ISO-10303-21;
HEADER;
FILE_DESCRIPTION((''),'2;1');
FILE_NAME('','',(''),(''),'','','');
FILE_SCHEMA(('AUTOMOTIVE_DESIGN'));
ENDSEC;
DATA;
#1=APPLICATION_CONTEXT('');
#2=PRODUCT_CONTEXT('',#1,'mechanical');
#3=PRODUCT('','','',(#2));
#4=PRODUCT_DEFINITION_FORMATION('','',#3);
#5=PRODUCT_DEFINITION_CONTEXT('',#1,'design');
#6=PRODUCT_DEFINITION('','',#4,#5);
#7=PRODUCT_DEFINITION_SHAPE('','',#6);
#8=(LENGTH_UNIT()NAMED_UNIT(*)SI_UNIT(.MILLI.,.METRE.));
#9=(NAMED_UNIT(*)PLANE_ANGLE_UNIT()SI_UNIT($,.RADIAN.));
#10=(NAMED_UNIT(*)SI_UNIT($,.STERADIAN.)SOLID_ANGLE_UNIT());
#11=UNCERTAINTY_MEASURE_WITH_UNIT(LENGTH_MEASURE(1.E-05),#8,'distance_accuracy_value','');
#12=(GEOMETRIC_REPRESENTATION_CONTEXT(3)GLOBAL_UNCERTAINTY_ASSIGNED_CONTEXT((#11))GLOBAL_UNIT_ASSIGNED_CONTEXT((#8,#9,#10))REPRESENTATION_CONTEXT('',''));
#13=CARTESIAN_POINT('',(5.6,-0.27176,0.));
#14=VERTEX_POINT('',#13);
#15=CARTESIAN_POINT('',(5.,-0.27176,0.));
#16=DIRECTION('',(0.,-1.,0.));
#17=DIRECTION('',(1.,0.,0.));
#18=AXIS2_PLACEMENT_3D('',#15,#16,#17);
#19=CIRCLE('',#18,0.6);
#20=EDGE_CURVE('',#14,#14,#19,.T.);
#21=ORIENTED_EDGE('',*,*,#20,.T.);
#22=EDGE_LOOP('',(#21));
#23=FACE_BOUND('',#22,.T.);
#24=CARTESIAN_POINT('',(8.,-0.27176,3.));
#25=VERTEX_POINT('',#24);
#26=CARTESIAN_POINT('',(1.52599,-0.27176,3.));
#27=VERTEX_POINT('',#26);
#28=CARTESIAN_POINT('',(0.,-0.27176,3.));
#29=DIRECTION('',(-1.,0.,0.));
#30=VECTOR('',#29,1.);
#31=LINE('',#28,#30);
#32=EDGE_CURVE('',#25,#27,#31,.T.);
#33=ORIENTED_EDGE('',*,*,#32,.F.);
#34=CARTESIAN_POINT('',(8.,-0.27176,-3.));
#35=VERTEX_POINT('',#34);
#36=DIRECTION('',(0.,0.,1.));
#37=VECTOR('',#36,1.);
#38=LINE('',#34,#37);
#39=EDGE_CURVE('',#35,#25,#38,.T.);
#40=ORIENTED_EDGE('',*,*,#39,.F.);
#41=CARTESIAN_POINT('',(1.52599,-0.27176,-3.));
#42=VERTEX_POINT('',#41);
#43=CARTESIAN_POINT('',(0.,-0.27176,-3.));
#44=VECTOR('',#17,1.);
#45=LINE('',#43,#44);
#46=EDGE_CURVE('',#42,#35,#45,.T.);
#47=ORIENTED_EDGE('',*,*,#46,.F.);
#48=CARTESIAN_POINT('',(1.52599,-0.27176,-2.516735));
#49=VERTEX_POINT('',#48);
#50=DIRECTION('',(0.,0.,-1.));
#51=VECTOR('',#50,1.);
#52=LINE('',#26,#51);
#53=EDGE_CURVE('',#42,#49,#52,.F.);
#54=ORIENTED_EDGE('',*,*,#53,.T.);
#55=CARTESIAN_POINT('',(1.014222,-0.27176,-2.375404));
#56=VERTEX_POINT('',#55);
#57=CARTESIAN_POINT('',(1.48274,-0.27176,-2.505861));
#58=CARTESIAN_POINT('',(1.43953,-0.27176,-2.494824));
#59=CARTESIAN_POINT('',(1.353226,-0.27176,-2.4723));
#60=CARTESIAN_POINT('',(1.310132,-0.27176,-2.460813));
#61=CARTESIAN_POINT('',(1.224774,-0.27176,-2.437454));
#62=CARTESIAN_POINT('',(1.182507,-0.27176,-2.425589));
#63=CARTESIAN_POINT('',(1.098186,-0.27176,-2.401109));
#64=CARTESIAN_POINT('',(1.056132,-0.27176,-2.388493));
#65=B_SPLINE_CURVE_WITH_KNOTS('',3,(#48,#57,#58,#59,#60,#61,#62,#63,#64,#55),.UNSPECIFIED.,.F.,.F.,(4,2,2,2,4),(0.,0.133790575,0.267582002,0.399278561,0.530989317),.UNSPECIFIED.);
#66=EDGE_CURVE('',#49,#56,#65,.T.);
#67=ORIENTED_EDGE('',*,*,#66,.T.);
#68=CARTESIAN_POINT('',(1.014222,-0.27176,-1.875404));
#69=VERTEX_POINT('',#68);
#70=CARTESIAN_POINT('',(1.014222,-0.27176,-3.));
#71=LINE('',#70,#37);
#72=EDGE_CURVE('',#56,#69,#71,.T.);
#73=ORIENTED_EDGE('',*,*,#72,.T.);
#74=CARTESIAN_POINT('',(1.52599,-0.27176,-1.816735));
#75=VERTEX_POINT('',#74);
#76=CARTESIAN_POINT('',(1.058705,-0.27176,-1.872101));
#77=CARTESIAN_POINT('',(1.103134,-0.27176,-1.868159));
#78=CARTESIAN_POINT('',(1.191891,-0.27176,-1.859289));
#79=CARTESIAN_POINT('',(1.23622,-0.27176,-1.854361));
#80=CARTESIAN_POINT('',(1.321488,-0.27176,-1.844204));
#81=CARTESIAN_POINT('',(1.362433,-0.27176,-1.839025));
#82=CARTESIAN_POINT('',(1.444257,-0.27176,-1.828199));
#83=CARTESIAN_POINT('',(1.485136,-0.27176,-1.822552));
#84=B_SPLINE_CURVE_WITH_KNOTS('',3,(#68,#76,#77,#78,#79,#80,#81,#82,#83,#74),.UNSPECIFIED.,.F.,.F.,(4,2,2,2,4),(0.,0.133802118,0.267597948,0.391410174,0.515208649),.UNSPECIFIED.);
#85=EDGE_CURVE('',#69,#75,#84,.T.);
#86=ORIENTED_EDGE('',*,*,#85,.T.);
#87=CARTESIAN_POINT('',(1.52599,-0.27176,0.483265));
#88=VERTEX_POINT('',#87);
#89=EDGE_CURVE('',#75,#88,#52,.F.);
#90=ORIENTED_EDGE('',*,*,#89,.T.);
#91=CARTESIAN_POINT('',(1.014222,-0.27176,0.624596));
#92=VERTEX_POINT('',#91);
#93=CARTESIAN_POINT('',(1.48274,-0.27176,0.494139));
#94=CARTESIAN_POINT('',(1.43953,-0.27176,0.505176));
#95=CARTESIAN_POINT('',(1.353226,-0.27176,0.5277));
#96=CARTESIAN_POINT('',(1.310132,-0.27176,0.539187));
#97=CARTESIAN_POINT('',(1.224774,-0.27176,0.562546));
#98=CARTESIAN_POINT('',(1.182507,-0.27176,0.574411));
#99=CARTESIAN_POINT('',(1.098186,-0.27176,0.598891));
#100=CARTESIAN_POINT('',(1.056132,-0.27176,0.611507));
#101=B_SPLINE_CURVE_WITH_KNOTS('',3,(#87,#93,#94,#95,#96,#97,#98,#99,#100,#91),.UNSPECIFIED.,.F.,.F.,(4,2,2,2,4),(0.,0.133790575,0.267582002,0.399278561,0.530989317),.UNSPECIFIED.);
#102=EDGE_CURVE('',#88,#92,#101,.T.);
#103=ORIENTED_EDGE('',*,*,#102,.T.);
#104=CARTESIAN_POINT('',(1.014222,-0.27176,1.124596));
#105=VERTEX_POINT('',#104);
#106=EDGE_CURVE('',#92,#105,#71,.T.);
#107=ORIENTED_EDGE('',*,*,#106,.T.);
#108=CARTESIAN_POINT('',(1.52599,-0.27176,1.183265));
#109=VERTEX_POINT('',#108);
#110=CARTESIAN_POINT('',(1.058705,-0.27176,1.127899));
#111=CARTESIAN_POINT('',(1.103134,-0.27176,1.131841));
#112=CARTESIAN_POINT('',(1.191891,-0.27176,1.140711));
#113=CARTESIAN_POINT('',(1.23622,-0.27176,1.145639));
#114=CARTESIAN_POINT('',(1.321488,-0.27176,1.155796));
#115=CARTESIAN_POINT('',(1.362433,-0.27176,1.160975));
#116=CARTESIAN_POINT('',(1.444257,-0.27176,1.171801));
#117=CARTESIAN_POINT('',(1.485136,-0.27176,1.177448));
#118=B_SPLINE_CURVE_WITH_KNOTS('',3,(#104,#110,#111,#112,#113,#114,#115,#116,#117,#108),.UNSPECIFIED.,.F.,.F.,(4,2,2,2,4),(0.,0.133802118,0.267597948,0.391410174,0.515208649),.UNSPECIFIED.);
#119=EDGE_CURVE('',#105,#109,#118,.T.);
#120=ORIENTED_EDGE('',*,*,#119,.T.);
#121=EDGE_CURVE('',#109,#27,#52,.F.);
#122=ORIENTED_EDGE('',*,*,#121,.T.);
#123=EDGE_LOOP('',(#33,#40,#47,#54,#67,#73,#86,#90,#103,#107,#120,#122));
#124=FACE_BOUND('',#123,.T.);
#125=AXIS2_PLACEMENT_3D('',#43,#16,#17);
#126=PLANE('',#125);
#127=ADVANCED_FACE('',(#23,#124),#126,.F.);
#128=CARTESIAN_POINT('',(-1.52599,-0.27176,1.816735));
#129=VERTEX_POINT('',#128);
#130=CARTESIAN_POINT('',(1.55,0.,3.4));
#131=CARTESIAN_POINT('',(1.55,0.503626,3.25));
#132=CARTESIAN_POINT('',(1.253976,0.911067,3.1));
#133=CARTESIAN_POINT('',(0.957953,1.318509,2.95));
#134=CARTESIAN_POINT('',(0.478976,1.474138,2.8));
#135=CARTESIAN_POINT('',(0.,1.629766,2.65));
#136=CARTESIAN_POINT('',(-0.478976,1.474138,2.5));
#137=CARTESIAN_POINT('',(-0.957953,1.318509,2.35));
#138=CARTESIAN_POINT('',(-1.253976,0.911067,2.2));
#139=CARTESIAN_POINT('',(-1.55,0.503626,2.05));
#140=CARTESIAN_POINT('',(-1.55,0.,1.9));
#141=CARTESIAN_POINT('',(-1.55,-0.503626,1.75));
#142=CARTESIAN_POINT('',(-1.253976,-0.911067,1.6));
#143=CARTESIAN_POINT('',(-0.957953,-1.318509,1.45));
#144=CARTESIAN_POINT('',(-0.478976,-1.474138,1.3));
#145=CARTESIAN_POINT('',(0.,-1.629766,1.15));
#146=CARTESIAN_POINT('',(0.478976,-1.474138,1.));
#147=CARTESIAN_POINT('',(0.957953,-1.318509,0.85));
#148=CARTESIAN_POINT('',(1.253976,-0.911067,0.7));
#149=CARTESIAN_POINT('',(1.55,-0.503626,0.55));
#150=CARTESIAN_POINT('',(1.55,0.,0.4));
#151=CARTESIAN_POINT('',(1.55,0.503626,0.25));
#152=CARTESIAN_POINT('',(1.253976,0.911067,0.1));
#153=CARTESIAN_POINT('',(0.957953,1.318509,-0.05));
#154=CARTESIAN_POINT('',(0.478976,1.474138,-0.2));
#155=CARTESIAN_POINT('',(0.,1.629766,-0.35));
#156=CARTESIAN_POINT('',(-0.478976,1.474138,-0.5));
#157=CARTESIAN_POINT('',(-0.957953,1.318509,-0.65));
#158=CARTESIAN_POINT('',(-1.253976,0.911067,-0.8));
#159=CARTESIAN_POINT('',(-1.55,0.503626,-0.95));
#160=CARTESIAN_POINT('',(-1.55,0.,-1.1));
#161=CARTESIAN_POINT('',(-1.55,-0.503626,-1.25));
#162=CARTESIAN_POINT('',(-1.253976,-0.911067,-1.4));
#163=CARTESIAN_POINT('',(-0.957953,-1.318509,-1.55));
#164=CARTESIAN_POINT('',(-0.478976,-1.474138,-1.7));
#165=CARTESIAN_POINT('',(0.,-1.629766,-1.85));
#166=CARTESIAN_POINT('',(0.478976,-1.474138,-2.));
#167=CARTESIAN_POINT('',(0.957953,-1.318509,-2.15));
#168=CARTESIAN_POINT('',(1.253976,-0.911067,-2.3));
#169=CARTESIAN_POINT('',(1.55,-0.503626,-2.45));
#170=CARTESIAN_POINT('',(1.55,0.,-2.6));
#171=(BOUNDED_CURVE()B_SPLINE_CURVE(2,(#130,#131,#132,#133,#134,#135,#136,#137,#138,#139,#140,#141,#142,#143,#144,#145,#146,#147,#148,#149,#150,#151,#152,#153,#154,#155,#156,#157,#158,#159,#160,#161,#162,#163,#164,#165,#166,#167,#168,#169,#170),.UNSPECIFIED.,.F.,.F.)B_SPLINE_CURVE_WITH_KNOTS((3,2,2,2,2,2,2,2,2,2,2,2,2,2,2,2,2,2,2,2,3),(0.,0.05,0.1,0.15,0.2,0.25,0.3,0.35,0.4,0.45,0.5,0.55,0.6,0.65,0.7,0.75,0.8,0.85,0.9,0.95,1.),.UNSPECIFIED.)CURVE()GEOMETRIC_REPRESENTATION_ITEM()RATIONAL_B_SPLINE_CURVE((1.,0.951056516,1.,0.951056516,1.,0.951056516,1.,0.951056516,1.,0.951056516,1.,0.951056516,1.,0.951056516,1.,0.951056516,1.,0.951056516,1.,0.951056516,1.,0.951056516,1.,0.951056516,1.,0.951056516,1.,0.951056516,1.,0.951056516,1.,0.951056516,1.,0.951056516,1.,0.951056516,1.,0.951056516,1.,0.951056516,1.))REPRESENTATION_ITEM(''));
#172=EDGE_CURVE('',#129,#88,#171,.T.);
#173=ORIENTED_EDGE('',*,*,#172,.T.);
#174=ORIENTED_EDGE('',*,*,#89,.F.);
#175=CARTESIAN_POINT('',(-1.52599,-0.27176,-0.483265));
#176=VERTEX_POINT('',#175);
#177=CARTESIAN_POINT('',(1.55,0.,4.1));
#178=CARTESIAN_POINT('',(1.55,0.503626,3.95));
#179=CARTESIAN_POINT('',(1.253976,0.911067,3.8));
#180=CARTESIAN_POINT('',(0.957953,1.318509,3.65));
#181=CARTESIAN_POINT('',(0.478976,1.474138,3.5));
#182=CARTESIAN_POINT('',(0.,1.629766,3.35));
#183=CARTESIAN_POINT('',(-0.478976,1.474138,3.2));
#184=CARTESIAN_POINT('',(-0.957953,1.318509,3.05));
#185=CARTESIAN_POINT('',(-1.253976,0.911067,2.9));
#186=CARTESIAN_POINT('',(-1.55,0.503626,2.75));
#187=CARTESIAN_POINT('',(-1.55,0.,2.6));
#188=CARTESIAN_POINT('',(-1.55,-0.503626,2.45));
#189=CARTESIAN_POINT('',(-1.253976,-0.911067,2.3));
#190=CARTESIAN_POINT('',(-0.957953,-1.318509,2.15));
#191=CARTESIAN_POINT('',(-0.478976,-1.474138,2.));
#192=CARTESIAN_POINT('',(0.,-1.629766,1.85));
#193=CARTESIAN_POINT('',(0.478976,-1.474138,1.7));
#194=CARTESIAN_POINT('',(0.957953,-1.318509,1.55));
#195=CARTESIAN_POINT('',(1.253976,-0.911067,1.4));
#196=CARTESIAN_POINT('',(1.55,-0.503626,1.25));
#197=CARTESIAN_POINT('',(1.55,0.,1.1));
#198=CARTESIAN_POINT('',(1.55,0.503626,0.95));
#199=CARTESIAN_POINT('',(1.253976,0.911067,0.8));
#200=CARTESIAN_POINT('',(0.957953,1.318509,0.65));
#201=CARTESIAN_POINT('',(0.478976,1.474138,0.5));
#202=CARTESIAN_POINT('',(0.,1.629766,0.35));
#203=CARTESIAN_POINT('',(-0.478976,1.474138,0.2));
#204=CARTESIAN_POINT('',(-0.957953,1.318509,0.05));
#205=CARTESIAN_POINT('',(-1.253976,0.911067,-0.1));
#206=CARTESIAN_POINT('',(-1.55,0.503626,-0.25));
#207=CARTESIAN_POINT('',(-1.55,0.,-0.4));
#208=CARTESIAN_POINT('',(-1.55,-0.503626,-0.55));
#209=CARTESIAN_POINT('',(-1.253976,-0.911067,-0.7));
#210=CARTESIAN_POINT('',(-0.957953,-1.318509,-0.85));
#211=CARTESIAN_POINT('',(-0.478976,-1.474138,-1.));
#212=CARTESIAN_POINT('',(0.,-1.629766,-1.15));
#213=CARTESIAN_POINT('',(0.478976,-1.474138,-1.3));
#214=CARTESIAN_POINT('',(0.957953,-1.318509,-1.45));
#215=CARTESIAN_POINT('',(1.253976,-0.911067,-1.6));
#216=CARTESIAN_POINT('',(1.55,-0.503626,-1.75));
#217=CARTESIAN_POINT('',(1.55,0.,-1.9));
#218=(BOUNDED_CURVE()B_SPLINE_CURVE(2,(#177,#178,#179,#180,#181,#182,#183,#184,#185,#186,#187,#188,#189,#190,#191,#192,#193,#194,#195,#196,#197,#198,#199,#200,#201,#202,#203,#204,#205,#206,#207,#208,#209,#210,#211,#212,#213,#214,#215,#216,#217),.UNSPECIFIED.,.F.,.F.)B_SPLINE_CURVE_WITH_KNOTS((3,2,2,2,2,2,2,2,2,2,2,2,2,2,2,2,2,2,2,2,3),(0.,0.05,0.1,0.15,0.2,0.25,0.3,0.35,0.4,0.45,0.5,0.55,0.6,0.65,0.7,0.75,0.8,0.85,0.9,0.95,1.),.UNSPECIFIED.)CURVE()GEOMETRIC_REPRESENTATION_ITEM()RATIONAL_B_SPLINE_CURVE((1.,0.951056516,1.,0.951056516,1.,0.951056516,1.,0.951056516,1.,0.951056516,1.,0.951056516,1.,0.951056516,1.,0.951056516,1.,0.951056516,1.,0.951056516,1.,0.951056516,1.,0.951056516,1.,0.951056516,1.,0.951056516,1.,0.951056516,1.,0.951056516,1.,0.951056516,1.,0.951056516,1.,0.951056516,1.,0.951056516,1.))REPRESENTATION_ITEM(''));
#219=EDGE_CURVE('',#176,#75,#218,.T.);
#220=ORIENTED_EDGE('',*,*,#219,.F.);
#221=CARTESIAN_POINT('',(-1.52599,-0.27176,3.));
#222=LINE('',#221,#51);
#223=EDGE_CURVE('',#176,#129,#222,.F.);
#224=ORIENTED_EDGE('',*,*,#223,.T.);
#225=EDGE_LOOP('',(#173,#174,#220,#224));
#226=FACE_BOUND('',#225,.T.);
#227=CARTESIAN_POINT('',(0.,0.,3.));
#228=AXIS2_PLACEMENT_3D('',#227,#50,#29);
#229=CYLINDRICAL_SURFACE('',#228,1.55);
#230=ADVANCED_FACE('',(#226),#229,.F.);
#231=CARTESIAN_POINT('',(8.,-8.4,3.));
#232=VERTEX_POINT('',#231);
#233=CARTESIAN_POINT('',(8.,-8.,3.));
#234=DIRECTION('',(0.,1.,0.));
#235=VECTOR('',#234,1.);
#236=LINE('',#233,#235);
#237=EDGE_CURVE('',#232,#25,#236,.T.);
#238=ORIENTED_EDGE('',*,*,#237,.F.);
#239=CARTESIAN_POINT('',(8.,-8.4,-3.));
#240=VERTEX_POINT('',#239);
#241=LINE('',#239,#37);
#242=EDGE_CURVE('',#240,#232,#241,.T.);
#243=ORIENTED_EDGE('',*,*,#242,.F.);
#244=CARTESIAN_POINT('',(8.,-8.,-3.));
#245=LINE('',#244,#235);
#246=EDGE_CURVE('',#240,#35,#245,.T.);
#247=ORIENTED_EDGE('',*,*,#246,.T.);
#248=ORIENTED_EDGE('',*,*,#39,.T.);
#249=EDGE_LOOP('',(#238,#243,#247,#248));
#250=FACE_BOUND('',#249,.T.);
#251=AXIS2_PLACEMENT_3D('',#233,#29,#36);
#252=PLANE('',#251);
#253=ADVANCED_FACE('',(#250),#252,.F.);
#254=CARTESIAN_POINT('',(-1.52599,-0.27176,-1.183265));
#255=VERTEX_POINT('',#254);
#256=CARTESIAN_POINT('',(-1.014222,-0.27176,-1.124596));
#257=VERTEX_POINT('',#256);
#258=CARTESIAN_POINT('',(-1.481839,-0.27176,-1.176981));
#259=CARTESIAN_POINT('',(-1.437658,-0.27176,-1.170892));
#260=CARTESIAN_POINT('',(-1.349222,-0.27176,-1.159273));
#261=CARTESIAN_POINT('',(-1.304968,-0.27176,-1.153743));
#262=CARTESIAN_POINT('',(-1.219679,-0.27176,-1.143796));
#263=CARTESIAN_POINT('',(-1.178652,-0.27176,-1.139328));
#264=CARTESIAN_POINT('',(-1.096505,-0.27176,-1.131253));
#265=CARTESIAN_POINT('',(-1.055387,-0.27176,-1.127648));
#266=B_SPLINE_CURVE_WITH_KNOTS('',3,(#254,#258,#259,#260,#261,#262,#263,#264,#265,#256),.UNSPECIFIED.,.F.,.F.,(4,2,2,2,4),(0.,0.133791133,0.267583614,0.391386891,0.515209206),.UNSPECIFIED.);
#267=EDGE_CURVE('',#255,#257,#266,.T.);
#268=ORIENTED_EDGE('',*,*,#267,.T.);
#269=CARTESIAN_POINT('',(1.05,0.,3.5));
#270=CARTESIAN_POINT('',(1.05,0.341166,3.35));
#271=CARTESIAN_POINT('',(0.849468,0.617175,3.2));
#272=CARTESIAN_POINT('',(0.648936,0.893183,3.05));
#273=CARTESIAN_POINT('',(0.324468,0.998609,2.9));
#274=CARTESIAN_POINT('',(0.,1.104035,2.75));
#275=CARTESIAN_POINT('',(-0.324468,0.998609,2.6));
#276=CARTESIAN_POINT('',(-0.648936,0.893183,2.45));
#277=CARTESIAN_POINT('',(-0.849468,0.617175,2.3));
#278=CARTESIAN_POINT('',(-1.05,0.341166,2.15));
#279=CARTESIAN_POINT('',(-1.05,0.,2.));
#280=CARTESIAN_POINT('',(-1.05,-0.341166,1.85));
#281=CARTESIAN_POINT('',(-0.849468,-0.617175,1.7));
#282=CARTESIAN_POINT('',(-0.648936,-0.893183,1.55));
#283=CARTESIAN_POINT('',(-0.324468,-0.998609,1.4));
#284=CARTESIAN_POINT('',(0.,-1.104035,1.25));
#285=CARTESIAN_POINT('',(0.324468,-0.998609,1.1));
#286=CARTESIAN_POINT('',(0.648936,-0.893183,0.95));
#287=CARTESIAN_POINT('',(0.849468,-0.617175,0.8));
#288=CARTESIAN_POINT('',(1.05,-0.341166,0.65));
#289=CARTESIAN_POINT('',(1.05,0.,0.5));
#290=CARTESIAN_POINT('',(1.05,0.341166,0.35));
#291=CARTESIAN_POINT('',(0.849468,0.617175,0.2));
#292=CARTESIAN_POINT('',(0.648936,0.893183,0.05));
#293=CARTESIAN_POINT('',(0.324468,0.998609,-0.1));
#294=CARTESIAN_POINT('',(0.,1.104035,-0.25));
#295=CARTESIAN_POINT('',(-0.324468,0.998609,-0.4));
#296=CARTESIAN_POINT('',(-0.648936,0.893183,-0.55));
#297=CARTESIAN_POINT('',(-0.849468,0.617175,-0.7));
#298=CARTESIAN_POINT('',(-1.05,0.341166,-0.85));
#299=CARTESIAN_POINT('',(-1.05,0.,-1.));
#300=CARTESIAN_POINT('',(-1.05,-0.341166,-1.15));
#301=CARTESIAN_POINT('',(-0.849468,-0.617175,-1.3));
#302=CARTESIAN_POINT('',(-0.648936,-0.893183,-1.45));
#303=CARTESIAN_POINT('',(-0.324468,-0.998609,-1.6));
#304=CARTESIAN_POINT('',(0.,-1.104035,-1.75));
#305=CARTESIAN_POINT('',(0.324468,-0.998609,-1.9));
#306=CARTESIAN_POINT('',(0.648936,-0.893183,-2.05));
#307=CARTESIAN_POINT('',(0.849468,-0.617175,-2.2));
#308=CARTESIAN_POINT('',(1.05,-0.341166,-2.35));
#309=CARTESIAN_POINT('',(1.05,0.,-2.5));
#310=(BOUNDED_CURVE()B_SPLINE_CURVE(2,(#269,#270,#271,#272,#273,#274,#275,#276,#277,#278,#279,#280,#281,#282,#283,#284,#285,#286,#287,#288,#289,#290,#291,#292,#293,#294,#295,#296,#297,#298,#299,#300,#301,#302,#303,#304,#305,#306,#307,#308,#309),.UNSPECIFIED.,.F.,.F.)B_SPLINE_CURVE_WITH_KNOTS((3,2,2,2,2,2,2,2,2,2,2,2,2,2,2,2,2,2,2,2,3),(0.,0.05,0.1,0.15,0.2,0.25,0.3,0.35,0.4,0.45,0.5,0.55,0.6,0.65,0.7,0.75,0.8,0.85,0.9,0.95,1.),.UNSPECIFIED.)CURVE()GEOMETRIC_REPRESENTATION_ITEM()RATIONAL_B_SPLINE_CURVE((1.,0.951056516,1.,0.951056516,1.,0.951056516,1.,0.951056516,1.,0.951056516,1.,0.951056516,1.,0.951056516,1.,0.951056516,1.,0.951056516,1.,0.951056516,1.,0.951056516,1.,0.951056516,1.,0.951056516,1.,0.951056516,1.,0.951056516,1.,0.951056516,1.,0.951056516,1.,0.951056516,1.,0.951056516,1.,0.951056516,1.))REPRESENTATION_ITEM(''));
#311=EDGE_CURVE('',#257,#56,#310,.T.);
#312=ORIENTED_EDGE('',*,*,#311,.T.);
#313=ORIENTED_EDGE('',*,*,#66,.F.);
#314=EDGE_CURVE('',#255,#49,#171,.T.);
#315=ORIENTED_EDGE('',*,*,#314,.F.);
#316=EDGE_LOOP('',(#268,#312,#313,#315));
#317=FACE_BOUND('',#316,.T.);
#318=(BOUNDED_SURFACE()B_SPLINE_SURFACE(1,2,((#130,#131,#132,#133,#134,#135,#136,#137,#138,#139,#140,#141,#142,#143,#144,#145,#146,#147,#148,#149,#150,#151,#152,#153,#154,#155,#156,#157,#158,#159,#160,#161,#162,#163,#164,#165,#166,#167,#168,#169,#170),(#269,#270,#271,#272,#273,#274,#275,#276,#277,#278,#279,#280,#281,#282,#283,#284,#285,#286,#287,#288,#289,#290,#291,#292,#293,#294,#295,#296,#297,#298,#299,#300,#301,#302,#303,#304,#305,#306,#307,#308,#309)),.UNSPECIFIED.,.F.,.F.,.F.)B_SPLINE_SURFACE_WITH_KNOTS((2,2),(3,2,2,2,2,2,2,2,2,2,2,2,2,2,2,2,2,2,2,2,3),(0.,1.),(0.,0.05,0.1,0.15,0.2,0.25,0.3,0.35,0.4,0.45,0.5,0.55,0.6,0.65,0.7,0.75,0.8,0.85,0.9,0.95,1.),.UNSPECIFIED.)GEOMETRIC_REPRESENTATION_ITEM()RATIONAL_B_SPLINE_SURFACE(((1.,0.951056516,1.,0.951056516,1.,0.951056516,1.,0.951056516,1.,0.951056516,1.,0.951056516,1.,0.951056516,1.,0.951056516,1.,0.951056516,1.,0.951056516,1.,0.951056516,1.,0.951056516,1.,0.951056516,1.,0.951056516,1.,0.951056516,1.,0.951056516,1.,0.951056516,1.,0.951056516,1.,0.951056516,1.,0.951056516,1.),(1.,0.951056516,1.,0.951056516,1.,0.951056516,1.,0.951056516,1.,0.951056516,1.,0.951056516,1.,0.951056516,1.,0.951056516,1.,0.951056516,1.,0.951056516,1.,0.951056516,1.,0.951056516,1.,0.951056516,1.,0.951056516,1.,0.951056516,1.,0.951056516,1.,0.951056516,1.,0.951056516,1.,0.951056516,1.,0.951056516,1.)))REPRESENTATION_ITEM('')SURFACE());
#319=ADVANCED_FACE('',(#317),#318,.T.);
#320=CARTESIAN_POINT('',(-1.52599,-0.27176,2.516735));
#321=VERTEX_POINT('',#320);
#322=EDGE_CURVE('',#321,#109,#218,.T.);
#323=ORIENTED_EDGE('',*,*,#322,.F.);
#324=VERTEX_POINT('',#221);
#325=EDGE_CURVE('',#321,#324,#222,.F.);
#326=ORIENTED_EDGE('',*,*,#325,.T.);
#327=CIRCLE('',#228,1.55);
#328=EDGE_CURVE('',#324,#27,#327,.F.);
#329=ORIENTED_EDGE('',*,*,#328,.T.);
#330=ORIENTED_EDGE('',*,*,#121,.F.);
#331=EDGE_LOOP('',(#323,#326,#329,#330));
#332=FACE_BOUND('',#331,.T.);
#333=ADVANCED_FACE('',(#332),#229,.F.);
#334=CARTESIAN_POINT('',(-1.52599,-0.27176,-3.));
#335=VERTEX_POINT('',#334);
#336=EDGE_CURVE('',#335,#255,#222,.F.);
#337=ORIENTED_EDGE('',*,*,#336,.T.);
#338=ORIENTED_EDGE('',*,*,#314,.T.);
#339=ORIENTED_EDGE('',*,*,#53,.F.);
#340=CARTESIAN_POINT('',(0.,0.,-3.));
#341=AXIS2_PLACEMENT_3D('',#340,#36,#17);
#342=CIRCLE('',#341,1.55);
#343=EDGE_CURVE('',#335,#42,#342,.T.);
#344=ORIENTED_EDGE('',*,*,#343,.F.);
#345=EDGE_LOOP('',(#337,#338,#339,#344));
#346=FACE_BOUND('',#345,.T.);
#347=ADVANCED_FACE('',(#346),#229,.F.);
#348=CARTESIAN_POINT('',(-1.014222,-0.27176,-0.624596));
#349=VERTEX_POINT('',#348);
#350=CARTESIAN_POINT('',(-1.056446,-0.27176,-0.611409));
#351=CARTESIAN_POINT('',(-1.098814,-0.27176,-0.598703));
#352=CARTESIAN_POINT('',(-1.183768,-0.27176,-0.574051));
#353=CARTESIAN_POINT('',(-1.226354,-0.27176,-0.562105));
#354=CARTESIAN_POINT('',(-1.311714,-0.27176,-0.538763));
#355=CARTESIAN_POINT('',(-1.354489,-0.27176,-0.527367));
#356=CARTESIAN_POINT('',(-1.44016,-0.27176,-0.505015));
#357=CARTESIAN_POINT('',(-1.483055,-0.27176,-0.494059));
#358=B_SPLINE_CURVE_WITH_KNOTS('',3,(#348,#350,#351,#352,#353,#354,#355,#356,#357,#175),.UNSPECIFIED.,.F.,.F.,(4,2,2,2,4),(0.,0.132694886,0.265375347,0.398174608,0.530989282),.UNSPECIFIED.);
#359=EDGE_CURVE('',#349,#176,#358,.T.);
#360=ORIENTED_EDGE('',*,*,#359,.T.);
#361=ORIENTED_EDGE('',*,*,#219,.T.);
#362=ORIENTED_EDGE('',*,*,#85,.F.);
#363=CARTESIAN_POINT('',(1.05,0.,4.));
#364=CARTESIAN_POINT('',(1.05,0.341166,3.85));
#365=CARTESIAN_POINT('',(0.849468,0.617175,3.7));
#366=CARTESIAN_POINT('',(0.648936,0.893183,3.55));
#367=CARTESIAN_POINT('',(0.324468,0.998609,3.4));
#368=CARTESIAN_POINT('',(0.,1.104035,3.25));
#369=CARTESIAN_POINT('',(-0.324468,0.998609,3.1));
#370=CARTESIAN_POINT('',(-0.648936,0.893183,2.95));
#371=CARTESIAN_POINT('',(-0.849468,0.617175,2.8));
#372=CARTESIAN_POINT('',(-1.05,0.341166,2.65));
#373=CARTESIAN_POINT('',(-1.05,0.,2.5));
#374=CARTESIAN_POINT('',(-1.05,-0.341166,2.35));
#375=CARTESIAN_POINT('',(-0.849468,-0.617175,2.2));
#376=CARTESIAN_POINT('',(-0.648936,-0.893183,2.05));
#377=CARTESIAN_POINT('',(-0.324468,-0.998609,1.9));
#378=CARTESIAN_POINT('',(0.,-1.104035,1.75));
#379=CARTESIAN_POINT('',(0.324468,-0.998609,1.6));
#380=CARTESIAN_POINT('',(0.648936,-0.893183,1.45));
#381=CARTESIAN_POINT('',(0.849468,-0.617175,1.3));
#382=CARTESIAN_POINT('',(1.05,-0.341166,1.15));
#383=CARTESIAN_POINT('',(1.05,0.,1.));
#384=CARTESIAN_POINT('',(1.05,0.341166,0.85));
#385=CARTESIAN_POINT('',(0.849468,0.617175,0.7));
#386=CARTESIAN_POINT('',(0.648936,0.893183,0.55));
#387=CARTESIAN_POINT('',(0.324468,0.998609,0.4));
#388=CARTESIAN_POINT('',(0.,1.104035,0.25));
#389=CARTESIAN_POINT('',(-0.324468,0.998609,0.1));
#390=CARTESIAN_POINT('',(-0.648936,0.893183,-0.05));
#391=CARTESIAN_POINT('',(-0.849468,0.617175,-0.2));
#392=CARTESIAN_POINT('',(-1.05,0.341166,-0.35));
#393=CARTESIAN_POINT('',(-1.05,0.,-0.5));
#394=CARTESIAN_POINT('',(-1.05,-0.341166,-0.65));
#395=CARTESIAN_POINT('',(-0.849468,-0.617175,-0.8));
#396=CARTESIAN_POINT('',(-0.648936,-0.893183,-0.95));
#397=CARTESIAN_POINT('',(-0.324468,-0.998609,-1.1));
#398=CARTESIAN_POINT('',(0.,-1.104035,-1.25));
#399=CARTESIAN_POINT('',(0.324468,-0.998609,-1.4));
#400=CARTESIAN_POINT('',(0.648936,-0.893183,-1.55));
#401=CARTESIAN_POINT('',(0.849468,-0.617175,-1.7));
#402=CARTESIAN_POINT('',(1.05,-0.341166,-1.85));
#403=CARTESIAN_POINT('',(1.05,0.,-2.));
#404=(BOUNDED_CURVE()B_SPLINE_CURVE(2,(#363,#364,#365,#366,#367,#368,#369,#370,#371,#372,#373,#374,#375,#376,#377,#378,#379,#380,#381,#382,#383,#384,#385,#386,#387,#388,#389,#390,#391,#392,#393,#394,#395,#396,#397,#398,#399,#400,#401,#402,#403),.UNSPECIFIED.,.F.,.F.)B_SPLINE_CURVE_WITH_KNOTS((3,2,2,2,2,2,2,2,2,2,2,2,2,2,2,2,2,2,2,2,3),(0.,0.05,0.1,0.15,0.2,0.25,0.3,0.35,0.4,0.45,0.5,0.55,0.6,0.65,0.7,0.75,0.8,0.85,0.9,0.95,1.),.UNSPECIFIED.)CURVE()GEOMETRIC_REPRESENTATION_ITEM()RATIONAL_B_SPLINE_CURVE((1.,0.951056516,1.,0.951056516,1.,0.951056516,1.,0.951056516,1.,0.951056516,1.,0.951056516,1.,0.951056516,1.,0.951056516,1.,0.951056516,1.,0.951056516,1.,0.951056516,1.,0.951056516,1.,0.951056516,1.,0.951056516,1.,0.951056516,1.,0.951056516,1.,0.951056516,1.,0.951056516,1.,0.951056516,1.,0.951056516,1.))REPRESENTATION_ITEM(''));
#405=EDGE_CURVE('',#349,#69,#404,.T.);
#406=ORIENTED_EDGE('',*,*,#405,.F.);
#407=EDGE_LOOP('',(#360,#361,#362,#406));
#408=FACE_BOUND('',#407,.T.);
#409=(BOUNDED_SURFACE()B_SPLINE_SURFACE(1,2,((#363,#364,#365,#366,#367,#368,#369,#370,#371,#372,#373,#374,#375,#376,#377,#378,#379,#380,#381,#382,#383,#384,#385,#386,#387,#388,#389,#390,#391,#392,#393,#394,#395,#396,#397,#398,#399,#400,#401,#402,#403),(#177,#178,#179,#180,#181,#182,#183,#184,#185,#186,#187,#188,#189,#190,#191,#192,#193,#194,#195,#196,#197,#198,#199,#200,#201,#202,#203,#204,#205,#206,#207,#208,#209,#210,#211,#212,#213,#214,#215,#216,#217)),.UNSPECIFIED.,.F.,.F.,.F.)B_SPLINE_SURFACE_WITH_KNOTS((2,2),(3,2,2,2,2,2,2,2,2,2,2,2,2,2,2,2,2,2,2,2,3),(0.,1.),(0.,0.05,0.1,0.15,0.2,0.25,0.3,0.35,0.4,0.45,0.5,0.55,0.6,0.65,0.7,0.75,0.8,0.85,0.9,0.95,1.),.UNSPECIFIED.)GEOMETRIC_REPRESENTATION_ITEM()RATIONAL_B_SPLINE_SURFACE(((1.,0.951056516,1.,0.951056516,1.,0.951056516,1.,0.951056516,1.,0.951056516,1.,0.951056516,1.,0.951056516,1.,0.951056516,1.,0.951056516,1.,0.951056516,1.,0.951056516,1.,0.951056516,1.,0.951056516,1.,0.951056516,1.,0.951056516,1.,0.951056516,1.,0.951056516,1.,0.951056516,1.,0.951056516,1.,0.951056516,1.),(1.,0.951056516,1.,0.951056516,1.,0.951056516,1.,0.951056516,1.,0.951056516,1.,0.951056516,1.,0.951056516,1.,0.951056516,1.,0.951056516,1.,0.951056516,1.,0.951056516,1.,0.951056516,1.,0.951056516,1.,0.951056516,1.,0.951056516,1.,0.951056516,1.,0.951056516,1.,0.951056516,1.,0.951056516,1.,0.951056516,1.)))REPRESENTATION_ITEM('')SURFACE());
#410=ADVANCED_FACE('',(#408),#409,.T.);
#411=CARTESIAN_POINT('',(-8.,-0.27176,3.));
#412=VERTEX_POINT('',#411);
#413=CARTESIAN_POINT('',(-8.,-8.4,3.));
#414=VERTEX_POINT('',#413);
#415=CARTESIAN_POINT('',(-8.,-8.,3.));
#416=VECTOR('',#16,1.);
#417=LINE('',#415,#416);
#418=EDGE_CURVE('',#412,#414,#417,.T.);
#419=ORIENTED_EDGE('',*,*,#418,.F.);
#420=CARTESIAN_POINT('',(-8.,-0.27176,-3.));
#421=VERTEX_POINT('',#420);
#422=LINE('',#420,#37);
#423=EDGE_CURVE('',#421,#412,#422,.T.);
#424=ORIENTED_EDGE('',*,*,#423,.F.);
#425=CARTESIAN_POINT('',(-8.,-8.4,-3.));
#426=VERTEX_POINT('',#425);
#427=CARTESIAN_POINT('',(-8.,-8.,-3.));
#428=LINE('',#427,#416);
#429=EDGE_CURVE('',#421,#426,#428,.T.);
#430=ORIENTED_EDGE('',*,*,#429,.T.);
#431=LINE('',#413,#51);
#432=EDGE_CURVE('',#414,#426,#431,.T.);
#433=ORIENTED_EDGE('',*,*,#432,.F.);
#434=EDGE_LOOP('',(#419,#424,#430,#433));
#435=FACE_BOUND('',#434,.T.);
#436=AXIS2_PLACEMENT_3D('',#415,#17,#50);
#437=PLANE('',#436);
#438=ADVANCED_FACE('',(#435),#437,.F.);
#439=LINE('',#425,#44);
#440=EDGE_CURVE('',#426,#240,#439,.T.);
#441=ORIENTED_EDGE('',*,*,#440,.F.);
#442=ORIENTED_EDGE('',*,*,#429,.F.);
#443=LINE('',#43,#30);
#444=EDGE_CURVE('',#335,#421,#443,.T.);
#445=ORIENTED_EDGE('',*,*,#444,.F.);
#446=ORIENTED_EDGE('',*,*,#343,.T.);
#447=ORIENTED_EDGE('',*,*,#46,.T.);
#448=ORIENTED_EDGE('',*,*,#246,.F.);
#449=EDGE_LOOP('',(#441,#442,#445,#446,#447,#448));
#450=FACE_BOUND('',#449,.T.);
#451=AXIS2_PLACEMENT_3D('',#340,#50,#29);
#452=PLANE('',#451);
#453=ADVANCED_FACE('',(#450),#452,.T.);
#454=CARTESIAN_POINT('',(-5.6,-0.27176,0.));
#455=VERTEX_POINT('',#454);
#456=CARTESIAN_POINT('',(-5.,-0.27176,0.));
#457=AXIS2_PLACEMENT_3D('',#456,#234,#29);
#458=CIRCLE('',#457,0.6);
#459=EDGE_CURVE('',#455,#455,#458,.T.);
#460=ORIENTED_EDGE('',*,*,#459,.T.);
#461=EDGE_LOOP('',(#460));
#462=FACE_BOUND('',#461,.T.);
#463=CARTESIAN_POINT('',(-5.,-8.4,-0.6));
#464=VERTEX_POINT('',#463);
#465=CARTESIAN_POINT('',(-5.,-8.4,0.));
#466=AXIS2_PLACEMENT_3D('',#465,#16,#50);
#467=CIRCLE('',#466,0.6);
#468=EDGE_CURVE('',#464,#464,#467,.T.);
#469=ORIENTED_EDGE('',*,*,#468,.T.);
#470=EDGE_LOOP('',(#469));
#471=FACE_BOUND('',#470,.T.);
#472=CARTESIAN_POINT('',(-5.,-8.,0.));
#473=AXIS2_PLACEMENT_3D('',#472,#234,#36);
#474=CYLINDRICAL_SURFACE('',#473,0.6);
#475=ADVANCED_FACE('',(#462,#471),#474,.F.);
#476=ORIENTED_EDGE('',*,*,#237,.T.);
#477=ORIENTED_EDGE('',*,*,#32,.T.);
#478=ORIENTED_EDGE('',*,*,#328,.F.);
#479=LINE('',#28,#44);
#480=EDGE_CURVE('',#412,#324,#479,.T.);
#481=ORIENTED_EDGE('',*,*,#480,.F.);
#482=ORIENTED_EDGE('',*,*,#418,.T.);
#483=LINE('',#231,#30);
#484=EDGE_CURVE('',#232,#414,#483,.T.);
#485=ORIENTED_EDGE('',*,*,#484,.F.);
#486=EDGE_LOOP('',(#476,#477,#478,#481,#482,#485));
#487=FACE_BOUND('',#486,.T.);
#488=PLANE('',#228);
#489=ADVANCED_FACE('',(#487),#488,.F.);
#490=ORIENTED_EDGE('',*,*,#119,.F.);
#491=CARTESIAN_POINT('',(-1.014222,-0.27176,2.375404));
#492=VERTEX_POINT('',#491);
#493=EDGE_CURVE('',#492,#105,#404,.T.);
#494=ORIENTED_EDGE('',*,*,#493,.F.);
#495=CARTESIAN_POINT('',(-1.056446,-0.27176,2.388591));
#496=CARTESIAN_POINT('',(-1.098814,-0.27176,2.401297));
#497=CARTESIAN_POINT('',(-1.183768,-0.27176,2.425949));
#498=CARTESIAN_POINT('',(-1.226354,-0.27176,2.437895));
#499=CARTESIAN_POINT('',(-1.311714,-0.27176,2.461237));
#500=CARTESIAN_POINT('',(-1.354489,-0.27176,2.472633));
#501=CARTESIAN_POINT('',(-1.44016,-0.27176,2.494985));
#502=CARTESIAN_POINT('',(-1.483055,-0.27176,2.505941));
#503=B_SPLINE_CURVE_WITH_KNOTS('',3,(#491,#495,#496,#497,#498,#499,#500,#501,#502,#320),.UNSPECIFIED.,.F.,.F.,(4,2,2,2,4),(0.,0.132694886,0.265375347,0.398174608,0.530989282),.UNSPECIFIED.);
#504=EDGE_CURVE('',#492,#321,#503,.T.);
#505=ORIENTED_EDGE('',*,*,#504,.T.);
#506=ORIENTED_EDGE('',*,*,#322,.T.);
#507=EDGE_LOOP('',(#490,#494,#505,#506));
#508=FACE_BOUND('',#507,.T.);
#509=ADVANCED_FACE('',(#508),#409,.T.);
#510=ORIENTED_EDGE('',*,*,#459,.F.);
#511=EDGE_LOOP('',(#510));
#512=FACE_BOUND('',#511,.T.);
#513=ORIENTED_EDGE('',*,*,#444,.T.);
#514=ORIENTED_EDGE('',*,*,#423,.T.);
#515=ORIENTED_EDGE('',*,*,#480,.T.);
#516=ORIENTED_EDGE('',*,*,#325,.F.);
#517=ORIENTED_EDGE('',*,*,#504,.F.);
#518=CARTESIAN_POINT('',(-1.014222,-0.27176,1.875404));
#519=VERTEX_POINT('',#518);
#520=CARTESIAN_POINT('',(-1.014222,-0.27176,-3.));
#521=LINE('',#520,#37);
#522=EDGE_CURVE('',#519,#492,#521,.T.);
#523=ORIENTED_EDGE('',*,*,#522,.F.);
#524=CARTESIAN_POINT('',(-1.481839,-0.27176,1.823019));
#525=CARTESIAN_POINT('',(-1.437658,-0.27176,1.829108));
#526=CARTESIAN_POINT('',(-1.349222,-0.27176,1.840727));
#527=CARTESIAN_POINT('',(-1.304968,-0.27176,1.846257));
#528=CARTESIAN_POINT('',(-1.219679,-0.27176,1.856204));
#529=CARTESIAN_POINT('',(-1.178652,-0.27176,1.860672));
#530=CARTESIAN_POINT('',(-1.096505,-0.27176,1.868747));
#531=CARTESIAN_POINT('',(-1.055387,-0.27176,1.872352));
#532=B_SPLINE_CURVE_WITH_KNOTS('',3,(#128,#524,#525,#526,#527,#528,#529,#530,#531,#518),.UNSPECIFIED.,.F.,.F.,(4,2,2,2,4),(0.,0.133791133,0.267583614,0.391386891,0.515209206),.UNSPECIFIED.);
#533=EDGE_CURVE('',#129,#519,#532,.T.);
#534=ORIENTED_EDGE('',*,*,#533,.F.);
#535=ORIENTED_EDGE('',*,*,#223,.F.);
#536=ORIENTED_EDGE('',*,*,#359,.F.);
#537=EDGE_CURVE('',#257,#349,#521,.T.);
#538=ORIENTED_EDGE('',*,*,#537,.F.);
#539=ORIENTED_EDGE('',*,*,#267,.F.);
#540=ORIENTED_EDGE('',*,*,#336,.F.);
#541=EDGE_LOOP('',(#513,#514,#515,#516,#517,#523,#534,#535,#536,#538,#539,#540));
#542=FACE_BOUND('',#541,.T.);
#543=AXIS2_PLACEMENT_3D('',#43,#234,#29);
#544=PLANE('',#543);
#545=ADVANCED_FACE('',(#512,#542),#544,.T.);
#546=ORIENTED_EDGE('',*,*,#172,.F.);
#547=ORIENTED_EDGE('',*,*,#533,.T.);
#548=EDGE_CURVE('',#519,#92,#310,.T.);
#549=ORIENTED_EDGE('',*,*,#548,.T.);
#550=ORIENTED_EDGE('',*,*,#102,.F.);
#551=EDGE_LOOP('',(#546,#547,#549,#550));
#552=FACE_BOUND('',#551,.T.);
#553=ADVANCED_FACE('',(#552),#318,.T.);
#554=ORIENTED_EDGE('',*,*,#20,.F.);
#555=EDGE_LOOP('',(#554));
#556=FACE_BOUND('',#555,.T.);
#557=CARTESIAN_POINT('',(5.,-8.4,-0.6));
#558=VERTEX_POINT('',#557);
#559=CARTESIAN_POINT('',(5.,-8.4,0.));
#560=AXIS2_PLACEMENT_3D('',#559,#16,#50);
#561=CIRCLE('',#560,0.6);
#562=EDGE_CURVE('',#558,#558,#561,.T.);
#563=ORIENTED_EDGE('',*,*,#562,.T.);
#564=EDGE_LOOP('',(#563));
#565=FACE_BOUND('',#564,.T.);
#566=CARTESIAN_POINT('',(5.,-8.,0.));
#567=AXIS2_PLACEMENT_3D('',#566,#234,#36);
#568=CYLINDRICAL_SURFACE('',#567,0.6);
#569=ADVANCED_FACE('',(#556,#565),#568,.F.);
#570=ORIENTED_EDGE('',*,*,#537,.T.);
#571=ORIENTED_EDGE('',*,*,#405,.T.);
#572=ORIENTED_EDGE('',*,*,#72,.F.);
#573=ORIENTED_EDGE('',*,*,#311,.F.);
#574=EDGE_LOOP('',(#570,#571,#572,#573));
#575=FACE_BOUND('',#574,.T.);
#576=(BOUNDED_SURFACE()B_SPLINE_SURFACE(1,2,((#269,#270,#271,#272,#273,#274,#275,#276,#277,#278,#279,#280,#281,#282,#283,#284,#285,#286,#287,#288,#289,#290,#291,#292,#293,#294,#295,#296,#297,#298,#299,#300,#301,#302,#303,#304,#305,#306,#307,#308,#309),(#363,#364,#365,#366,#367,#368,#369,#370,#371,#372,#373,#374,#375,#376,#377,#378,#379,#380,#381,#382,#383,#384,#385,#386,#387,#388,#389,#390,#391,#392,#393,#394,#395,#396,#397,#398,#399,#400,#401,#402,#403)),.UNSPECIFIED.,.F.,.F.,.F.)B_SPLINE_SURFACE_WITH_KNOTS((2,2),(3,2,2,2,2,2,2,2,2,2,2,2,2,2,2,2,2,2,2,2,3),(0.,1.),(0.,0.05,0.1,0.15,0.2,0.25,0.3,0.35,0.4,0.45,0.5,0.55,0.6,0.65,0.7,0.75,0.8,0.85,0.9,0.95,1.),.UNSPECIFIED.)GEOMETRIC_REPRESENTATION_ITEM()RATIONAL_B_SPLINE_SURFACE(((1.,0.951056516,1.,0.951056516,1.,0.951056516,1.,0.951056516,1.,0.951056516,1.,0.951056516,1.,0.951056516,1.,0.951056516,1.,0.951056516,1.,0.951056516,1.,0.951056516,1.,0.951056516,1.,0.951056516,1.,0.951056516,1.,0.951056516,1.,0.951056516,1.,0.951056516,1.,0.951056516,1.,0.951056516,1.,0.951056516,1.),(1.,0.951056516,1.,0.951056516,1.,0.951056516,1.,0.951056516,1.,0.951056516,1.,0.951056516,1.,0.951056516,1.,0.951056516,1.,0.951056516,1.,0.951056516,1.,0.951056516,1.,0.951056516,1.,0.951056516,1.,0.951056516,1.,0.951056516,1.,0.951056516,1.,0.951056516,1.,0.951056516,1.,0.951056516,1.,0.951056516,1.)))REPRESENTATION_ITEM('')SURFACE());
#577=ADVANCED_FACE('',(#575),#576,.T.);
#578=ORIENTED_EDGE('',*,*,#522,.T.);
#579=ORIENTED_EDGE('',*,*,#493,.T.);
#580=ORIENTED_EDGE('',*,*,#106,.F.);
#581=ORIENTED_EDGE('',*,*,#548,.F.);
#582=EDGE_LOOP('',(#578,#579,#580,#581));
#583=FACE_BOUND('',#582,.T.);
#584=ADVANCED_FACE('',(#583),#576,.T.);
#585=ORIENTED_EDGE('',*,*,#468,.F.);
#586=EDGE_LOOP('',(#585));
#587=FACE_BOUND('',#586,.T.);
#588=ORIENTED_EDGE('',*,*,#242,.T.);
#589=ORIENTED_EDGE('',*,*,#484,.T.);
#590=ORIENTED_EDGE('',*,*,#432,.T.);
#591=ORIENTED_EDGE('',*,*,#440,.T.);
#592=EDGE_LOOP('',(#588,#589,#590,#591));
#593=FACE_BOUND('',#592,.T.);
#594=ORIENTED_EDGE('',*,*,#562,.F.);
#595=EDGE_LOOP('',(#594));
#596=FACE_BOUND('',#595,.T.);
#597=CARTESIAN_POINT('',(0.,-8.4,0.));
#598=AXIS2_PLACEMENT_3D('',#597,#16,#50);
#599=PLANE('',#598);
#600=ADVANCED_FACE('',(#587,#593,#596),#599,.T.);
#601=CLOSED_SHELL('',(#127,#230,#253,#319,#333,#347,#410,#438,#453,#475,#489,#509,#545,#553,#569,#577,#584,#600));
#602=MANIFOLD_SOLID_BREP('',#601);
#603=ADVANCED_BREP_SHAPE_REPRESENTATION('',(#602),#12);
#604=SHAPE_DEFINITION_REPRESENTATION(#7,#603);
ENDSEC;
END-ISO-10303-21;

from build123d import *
from build123d.topology import SkipClean

# Parameters (mm, degrees)
SKETCH_1_W               = 16
SKETCH_1_H               = 16
SKETCH_1_R               = 1.55
EXTRUDE_1_DEPTH          = 3
SWEEP_1_PITCH            = 3
CUT_EXTRUDE_2_DEPTH      = 13.033723282
CUT_EXTRUDE_2_DEPTH_BACK = 13.033723282
SKETCH_8_R               = 0.6
CUT_EXTRUDE_3_DEPTH      = 12.704700005
SKETCH_11_W              = 16
SKETCH_11_H              = 6
SKETCH_11_R              = 0.6
EXTRUDE_2_DEPTH          = 0.4


with BuildPart() as part:
    # 草图1 → 凸台-拉伸1 (new, symmetric)
    with BuildSketch(Plane.XY):
        Rectangle(SKETCH_1_W, SKETCH_1_H)
        Circle(SKETCH_1_R, mode=Mode.SUBTRACT)
    extrude(amount=EXTRUDE_1_DEPTH, both=True)

    # 扫描1: arcs per turn and ends read off the stored shape
    # 扫描1: the profile of 草图10 profile screwed along a left-hand helix through 2 turns, 10 arcs to a turn; built about Z, then put on its axis
    sweep_1_z = Axis((0, 0, 0), (0, 0, 1))
    sweep_1_corners = [(1.5503, 0, -0.39994), (1.5503, 0, -1.10006), (1.05, 0, -1), (1.05, 0, -0.5)]
    with BuildLine(mode=Mode.PRIVATE) as sweep_1_profile:
        Line(sweep_1_corners[0], sweep_1_corners[1])
        Line(sweep_1_corners[1], sweep_1_corners[2])
        Line(sweep_1_corners[2], sweep_1_corners[3])
        Line(sweep_1_corners[3], sweep_1_corners[0])
    sweep_1_cap = Face(sweep_1_profile.wire())
    sweep_1_turn_angles = [0, -18, -36, -54, -72, -90, -108, -126, -144, -162, -180, -198, -216, -234, -252, -270, -288, -306, -324, -342, -360]
    sweep_1_turn_weights = [1, 0.9510565162951535, 1, 0.9510565162951535, 1, 0.9510565162951535, 1, 0.9510565162951535, 1, 0.9510565162951535, 1, 0.9510565162951535, 1, 0.9510565162951535, 1, 0.9510565162951535, 1, 0.9510565162951535, 1, 0.9510565162951535, 1]
    sweep_1_turn_rails = [Edge.make_bspline([Vector(p[0], p[1], 0).rotate(sweep_1_z, sweep_1_turn_angles[k]) / sweep_1_turn_weights[k] + Vector(0, 0, p[2] + -SWEEP_1_PITCH * sweep_1_turn_angles[k] / 360) for k in range(21)], [0, 0, 0, 1, 1, 2, 2, 3, 3, 4, 4, 5, 5, 6, 6, 7, 7, 8, 8, 9, 9, 10, 10, 10], 2, sweep_1_turn_weights) for p in sweep_1_corners]
    sweep_1_turn_sides = [Face.make_surface_from_curves(sweep_1_turn_rails[p[0]], sweep_1_turn_rails[p[1]]) for p in [(0, 1), (1, 2), (2, 3), (3, 0)]]
    sweep_1 = Plane(origin=(0, 0, 3), x_dir=(1, 0, 0), z_dir=(0, 0, -1)) * Solid(Shell([*[p.moved(Location((0, 0, SWEEP_1_PITCH * i))) for i in range(2) for p in sweep_1_turn_sides], sweep_1_cap, sweep_1_cap.rotate(sweep_1_z, -720).moved(Location((0, 0, -SWEEP_1_PITCH * -720 / 360)))]))
    add(sweep_1)

    # 草图7 → 切除-拉伸2 (cut, two sides: drawn at the far end of the back side and taken through both)
    with BuildSketch(Plane.XY.offset(-CUT_EXTRUDE_2_DEPTH_BACK)):
        with BuildLine():
            Line((-8, -0.271759997), (-1.014222118, -0.271759997))
            ThreePointArc((-1.014222118, -0.271759997), (-0.137052502, 1.041017104), (1.05, 0))
            ThreePointArc((1.05, 0), (1.041017104, -0.137052502), (1.014222118, -0.271759997))
            Line((1.014222118, -0.271759997), (8, -0.271759997))
            Line((8, -0.271759997), (8, 8))
            Line((8, 8), (-8, 8))
            Line((-8, 8), (-8, -0.271759997))
        make_face()
        with BuildLine():
            Line((1.014222118, -0.271759997), (0, 0))
            Line((0, 0), (-1.014222118, -0.271759997))
            ThreePointArc((-1.014222118, -0.271759997), (0, -1.05), (1.014222118, -0.271759997))
        make_face()
        with BuildLine():
            Line((-1.014222118, -0.271759997), (0, 0))
            Line((0, 0), (1.014222118, -0.271759997))
            ThreePointArc((1.014222118, -0.271759997), (1.041017104, -0.137052502), (1.05, 0))
            ThreePointArc((1.05, 0), (-0.137052502, 1.041017104), (-1.014222118, -0.271759997))
        make_face()
    extrude(amount=CUT_EXTRUDE_2_DEPTH + CUT_EXTRUDE_2_DEPTH_BACK, mode=Mode.SUBTRACT)

    # 草图8 → 切除-拉伸3 (cut, through all)
    with BuildSketch(Plane(origin=(0, 0, 0), x_dir=(1, 0, 0), z_dir=(0, 1, 0))):
        with Locations(Location((-5, 0, 0), (0, 0, 270))):
            Circle(SKETCH_8_R)
        with Locations(Location((5, 0, 0), (0, 0, 270))):
            Circle(SKETCH_8_R)
    extrude(amount=-CUT_EXTRUDE_3_DEPTH, mode=Mode.SUBTRACT)

    # 草图11 → 凸台-拉伸2 (add)
    with SkipClean():  # the faces are left unmerged after this step: merging them gives an invalid solid
        with BuildSketch(Plane.XZ.offset(8)):
            Rectangle(SKETCH_11_W, SKETCH_11_H)
            with Locations((5, 0)):
                Circle(SKETCH_11_R, mode=Mode.SUBTRACT)
            with Locations(Location((-5, 0, 0), (0, 0, 180))):
                Circle(SKETCH_11_R, mode=Mode.SUBTRACT)
        extrude(amount=EXTRUDE_2_DEPTH)


solid = part.part
